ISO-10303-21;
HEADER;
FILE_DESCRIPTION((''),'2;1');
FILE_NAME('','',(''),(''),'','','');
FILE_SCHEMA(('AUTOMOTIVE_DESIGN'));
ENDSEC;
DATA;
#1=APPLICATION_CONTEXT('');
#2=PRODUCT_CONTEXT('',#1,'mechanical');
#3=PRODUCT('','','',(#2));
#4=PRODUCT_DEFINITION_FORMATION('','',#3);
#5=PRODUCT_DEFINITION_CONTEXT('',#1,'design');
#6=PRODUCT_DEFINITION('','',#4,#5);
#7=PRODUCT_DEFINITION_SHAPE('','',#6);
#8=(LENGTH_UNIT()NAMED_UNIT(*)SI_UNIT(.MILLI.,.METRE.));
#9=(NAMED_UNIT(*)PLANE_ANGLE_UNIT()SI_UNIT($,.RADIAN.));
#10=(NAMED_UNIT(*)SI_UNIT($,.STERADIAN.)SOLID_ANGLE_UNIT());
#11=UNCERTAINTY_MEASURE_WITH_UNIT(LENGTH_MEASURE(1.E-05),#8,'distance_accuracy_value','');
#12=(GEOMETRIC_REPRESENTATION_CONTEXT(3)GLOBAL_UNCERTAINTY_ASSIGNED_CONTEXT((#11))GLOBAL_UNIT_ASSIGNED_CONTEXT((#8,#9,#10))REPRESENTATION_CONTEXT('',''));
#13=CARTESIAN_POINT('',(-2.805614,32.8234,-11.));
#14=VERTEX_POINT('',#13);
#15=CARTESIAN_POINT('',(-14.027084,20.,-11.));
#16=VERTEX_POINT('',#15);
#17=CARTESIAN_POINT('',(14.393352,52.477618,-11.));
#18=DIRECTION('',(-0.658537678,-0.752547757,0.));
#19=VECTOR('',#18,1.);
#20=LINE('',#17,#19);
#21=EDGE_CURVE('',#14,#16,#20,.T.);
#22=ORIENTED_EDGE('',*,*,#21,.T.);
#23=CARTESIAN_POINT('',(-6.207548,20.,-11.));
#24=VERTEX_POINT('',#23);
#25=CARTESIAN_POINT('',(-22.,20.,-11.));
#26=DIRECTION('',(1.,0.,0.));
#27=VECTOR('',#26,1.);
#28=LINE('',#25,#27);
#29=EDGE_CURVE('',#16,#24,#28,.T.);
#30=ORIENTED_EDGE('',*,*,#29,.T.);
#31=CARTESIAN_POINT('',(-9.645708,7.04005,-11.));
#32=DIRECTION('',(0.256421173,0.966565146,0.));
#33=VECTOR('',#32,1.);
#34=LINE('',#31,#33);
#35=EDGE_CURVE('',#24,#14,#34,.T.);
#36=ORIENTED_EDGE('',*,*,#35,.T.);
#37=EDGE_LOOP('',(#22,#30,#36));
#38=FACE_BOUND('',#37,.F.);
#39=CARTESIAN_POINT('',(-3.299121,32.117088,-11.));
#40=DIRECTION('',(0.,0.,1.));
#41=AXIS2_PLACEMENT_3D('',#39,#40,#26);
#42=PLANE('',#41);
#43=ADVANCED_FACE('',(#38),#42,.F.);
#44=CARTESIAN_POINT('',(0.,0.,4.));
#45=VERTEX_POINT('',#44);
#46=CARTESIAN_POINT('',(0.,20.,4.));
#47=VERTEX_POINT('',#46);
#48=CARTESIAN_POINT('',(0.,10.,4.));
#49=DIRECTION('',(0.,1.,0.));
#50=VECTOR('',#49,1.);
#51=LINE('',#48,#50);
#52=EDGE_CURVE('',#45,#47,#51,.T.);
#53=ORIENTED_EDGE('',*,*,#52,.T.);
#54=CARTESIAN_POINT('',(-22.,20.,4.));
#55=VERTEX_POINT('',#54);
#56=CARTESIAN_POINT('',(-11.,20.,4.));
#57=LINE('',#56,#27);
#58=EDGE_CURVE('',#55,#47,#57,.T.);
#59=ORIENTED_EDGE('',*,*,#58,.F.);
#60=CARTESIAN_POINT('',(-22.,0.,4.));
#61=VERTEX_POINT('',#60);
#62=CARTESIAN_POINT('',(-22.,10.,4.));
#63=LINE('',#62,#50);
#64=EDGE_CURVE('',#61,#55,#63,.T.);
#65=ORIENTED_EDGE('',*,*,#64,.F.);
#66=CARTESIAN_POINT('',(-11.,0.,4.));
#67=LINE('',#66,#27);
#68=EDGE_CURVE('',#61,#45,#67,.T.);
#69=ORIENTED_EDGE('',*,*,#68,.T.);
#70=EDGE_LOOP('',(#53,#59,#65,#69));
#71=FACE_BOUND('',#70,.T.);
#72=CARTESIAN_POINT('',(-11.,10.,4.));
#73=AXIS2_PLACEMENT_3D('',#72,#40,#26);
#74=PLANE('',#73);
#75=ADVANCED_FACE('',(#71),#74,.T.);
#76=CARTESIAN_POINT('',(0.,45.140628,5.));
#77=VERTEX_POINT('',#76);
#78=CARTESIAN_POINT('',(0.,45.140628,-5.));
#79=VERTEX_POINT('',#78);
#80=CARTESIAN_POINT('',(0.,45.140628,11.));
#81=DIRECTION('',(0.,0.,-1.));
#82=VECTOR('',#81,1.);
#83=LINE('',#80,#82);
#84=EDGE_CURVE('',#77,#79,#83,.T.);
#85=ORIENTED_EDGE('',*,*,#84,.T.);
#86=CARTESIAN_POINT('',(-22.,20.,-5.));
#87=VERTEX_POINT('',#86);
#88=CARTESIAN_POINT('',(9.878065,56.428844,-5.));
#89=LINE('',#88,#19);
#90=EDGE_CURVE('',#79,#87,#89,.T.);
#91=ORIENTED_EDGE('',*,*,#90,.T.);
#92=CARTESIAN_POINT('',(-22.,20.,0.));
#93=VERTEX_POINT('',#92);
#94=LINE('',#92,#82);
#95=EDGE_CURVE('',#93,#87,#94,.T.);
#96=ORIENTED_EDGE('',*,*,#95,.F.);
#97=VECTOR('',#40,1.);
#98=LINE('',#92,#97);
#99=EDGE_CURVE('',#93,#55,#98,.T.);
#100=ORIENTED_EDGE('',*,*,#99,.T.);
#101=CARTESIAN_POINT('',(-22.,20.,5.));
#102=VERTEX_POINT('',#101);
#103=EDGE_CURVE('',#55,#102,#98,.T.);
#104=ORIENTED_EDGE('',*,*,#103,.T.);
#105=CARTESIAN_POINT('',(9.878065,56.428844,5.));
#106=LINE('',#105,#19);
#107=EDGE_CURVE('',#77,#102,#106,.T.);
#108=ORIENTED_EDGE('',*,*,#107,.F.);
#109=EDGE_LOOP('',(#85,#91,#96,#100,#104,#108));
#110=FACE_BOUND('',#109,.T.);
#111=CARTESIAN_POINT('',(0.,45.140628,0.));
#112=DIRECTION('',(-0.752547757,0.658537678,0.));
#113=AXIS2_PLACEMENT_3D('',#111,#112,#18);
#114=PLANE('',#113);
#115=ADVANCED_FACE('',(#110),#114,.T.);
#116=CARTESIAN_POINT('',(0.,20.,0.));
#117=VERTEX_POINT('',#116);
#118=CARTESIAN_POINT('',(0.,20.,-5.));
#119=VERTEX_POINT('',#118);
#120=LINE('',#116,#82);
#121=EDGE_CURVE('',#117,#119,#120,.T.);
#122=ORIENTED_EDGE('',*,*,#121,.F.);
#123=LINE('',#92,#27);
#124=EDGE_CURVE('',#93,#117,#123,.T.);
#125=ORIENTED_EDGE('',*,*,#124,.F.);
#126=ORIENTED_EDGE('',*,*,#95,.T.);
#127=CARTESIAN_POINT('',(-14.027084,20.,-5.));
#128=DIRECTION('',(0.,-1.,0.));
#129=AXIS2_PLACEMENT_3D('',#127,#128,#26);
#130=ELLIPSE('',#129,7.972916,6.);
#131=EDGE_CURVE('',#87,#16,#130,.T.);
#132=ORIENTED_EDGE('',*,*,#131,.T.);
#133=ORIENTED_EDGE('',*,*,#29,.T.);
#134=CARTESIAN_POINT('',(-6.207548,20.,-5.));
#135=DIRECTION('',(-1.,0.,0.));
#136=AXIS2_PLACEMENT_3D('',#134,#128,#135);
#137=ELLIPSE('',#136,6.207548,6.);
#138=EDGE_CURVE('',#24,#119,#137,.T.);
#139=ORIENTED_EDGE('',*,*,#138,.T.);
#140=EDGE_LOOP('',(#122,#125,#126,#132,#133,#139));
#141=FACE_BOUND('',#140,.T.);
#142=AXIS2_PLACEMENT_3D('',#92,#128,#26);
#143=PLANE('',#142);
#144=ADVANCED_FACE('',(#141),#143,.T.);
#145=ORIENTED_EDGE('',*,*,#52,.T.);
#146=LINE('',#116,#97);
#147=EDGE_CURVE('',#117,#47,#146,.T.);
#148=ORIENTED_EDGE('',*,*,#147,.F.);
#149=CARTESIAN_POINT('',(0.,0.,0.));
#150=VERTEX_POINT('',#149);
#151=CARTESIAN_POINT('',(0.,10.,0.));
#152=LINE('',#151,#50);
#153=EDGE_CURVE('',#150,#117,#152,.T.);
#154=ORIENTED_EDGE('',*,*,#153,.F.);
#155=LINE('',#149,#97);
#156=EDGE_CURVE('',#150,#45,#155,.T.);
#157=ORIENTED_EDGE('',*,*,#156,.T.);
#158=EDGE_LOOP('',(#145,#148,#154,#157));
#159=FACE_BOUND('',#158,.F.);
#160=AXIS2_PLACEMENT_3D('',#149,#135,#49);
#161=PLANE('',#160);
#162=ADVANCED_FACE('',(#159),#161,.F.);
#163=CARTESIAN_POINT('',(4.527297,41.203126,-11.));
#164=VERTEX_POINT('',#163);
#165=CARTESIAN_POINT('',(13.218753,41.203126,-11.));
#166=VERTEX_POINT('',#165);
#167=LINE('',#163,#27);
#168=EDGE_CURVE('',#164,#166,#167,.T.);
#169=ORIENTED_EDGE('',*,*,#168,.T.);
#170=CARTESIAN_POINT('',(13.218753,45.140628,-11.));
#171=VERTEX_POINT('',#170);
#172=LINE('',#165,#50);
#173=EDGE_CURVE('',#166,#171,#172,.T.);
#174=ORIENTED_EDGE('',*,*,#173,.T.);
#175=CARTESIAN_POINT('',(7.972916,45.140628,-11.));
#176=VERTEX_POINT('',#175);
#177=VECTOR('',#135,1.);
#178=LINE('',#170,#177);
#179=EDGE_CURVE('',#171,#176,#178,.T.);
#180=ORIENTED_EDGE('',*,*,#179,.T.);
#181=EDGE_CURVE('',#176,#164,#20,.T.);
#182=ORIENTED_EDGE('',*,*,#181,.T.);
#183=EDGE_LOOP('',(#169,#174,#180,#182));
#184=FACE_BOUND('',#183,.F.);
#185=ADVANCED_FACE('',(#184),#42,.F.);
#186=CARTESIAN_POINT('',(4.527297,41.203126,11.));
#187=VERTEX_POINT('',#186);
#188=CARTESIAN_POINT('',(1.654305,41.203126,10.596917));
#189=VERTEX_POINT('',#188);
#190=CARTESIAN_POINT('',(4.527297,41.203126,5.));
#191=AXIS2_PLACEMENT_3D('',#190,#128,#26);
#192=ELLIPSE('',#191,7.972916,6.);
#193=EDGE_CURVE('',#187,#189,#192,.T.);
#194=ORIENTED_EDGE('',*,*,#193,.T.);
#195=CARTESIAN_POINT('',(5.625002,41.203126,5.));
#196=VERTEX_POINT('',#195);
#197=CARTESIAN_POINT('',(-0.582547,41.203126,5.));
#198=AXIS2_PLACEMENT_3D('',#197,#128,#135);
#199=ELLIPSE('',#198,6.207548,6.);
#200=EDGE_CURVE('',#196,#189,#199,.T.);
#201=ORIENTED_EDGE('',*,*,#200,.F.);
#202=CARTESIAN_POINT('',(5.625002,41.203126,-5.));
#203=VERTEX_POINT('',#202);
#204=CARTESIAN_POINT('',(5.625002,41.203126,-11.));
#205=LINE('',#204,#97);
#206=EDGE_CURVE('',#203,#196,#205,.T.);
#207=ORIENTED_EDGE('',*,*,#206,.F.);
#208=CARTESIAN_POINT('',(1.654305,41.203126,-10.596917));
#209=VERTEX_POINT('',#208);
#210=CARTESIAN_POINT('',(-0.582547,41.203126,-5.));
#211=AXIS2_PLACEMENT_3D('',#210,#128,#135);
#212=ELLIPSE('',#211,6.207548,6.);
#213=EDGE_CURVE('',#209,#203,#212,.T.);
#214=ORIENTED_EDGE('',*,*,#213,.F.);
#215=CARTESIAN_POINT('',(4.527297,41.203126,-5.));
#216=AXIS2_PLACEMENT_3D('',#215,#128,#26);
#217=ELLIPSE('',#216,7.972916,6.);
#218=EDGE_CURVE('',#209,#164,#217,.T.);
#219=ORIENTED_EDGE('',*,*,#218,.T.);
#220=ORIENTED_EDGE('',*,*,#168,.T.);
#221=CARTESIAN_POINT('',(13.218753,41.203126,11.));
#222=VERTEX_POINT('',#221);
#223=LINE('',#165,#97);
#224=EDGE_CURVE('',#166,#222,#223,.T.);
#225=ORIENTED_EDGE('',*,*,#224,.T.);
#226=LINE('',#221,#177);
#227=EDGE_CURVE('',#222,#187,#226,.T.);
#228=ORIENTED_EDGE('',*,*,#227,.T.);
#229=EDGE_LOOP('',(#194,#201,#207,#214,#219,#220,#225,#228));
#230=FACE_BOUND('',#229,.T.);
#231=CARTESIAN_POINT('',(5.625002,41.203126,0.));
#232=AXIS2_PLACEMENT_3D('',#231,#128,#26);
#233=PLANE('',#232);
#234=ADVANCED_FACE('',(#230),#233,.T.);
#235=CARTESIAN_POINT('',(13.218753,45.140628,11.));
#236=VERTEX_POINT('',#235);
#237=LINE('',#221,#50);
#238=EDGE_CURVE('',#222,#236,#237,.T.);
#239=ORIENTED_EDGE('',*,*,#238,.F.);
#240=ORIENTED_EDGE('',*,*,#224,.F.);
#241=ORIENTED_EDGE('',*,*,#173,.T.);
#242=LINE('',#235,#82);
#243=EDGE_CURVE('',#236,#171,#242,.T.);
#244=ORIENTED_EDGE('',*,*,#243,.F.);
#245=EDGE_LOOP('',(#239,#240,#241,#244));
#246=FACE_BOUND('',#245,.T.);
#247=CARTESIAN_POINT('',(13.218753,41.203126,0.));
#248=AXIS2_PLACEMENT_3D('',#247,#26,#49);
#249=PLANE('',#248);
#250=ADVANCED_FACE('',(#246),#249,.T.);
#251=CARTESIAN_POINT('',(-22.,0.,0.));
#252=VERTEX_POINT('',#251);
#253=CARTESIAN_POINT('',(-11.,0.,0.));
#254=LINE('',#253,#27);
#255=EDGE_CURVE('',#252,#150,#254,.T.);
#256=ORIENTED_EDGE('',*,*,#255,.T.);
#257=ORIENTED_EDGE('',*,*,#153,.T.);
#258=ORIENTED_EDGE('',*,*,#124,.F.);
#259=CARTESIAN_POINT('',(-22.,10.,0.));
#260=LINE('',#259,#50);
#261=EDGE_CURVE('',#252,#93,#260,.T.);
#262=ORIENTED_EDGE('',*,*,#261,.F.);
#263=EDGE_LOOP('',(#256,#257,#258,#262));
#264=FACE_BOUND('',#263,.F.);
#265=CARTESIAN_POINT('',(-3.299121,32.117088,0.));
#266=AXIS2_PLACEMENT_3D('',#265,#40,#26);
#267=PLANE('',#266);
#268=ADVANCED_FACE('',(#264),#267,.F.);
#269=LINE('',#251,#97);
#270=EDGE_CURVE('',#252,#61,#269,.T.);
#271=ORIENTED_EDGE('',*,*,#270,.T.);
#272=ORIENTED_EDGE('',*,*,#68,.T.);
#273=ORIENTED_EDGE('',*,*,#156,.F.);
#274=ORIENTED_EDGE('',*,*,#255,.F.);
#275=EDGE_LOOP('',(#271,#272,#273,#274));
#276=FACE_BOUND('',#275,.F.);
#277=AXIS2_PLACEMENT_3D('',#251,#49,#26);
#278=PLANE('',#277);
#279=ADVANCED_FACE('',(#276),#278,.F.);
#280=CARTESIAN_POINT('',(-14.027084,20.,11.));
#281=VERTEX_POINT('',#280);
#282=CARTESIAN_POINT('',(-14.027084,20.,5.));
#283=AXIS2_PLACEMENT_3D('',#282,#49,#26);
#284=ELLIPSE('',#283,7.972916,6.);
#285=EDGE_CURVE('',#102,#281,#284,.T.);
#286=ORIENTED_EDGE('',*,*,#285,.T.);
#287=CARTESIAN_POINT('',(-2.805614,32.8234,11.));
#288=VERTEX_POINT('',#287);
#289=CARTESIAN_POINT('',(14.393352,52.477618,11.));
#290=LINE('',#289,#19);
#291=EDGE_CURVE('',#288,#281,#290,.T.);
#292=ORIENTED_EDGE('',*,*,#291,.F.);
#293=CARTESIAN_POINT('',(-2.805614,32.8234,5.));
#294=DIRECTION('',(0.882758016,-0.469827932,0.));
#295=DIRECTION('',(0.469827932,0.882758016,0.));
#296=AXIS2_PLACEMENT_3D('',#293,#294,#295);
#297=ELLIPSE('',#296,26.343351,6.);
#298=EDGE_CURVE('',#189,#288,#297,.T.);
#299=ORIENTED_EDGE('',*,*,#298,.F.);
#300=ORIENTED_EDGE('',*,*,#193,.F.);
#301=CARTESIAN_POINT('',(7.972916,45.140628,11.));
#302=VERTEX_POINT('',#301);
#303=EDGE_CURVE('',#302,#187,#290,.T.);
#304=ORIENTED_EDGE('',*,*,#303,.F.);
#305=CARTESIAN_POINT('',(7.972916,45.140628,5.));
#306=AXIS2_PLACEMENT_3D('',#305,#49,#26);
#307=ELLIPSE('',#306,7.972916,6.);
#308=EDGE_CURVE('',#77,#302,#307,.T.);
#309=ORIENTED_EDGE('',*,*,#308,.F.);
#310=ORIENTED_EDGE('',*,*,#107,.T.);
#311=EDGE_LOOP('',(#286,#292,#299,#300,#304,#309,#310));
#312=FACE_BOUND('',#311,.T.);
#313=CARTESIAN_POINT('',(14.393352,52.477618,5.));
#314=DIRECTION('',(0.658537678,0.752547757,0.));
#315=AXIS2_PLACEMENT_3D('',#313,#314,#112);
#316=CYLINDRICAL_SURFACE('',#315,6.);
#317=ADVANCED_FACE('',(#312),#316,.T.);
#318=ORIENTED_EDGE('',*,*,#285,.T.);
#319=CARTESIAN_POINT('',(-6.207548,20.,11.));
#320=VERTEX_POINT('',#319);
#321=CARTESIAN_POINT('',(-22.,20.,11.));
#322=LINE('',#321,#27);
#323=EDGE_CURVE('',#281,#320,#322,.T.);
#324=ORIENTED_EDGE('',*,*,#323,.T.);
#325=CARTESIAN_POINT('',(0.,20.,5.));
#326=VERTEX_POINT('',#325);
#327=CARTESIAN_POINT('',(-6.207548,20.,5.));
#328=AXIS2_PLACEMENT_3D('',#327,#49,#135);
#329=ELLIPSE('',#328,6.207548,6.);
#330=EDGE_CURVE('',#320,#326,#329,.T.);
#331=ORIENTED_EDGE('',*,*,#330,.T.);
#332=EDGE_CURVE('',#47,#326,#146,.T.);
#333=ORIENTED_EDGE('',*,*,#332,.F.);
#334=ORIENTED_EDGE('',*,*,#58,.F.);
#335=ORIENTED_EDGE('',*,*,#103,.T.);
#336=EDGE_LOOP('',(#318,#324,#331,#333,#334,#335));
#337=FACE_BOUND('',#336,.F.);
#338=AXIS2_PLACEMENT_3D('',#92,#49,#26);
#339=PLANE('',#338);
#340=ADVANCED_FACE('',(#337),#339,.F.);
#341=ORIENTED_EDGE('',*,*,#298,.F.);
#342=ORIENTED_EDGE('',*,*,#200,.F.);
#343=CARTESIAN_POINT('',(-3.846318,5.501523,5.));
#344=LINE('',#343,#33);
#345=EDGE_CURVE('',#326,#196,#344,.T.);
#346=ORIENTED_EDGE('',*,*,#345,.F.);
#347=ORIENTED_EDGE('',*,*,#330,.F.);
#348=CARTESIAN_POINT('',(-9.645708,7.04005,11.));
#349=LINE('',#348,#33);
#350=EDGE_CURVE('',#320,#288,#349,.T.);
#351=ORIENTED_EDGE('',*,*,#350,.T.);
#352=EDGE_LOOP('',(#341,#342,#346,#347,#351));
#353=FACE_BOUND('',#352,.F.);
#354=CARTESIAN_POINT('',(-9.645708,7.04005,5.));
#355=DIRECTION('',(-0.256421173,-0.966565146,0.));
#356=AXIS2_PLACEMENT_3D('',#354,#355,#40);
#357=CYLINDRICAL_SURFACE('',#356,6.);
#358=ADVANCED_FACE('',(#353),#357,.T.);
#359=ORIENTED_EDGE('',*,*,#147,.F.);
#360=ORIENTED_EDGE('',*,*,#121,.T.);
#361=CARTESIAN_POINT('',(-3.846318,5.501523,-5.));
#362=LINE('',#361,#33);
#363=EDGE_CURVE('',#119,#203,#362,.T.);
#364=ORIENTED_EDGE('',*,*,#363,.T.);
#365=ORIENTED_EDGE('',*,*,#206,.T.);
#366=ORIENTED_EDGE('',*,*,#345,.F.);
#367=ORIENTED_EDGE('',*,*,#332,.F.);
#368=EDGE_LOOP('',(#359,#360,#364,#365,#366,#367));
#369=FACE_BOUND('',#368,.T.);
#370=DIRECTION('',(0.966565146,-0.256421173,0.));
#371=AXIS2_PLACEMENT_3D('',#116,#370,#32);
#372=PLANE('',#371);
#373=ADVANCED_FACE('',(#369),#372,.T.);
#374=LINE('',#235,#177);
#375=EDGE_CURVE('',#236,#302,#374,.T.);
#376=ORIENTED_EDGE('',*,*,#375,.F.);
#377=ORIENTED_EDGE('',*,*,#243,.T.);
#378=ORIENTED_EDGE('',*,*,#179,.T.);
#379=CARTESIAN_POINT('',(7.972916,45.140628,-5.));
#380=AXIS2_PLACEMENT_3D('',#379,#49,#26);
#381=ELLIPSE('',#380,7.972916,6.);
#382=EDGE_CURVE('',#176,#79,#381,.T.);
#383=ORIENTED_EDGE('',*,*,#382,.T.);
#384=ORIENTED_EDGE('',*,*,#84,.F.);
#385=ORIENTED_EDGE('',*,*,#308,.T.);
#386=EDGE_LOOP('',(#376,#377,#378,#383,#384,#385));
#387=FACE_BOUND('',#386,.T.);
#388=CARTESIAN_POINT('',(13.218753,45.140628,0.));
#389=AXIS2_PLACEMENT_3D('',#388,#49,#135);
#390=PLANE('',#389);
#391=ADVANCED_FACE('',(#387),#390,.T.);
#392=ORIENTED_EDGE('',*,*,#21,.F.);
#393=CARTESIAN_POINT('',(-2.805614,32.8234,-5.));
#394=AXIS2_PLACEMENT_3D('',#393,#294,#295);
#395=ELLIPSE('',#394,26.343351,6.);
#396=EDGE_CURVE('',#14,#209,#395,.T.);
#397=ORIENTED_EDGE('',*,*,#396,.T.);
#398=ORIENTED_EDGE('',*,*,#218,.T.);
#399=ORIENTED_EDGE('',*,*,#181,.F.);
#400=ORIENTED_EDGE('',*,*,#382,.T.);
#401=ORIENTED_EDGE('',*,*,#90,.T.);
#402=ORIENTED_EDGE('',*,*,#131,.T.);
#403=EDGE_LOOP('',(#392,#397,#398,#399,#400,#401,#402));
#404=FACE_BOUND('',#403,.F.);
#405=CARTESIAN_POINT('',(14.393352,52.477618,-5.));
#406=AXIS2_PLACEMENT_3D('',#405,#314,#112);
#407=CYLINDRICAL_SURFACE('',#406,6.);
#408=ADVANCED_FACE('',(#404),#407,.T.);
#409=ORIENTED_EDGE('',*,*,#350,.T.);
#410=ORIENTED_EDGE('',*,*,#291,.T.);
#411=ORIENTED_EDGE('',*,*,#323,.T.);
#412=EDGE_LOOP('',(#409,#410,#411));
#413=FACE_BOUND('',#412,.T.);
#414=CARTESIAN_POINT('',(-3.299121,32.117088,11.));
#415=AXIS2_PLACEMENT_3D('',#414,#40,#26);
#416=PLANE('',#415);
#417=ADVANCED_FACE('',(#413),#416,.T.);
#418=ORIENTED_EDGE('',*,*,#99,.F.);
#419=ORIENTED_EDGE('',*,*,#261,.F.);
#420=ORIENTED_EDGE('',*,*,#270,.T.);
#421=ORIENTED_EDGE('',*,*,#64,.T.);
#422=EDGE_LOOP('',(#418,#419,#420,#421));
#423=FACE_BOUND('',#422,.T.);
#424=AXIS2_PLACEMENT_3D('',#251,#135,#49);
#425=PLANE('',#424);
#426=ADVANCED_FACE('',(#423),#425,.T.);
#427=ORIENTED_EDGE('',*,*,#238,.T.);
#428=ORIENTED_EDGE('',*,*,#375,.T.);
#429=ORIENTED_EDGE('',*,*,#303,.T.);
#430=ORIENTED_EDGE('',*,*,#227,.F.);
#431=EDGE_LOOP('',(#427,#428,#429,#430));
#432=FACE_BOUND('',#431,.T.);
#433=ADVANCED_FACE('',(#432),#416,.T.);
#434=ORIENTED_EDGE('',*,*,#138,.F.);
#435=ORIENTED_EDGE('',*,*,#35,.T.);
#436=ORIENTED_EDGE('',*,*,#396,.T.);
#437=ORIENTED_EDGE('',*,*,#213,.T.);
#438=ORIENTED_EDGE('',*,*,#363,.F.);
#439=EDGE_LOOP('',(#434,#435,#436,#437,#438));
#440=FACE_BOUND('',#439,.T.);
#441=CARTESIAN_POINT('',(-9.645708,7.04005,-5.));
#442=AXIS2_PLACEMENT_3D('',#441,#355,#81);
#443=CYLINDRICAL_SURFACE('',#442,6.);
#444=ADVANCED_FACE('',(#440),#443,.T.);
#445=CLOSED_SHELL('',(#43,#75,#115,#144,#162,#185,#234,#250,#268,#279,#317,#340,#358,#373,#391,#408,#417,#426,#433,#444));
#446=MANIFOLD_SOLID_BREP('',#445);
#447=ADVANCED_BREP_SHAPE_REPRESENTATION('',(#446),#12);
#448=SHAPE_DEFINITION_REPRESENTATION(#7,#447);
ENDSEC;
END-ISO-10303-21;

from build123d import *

# Parameters (mm, degrees)
F0_W         = 22
F0_H         = 20
F1_DEPTH     = 4
F2_DEPTH     = 11
F3_DEPTH     = 11
F4_T1_DEPTH  = 63.4073519566
F4_T6_DEPTH  = 51.9365723987
F4_T11_DEPTH = 51.9365723987


# Not quite as in the source:
# - a fillet or chamfer that OpenCascade refuses, or shapes differently, is made with other operations: its cross-section is extruded or revolved along the edge and cut away or added


with BuildPart() as f1:
    # F0 (on Top) → F1 (new body)
    with BuildSketch(Plane.XY):
        with Locations((-11, 10)):
            Rectangle(F0_W, F0_H)
    extrude(amount=F1_DEPTH)

    # F0 (on Top) → F2 (join)
    with BuildSketch(Plane.XY):
        Polygon((-22, 20), (0, 20), (5.6250016205, 41.2031263113), (13.2187530398, 41.2031263113), (13.2187530398, 45.1406277716), (0, 45.1406277716), align=None)
    extrude(amount=F2_DEPTH)

    # F0 (on Top) → F3 (join)
    with BuildSketch(Plane.XY):
        Polygon((-22, 20), (0, 20), (5.6250016205, 41.2031263113), (13.2187530398, 41.2031263113), (13.2187530398, 45.1406277716), (0, 45.1406277716), align=None)
    extrude(amount=-F3_DEPTH)

    # F4: fillet of radius 6 on 4 edges, made by hand

    # F4_s2 → F4_t1 (cut)
    with BuildSketch(Plane(origin=(32.2489050023, 36.8526234865, 0), x_dir=(0, 0, 1), z_dir=(-0.6585376784, -0.7525477567, 0))):
        with BuildLine():
            ThreePointArc((-5, 29.7268042156), (-9.2426406871, 27.9694449027), (-11, 23.7268042156))
            Line((-11, 23.7268042156), (-11, 29.7268042156))
            Line((-11, 29.7268042156), (-5, 29.7268042156))
        make_face()
        with BuildLine():
            ThreePointArc((5, 29.7268042156), (9.2426406871, 27.9694449027), (11, 23.7268042156))
            Line((11, 23.7268042156), (11, 29.7268042156))
            Line((11, 29.7268042156), (5, 29.7268042156))
        make_face()
    extrude(amount=F4_T1_DEPTH, mode=Mode.SUBTRACT)


with BuildPart() as f4_tool4:
    # F4_s5 → F4_t6 (new body)
    with BuildSketch(Plane(origin=(1.1106377761, 4.1864864479, 0), x_dir=(0, 0, 1), z_dir=(0.2564211727, 0.9665651464, 0))):
        with BuildLine():
            ThreePointArc((-11, -11.1284234549), (-9.2426406871, -6.8857827678), (-5, -5.1284234549))
            Line((-5, -5.1284234549), (-11, -5.1284234549))
            Line((-11, -5.1284234549), (-11, -11.1284234549))
        make_face()
    extrude(amount=F4_T6_DEPTH)

    split(bisect_by=Plane.XZ.offset(-41.2031263113), keep=Keep.TOP)


with BuildPart() as f1_1:
    add(f1.part)

    # F4_t3: cut F4_tool4
    add(f4_tool4.part, mode=Mode.SUBTRACT)


with BuildPart() as f4_tool9:
    # F4_s10 → F4_t11 (new body)
    with BuildSketch(Plane(origin=(1.1106377761, 4.1864864479, 0), x_dir=(0, 0, 1), z_dir=(0.2564211727, 0.9665651464, 0))):
        with BuildLine():
            ThreePointArc((11, -11.1284234549), (9.2426406871, -6.8857827678), (5, -5.1284234549))
            Line((5, -5.1284234549), (11, -5.1284234549))
            Line((11, -5.1284234549), (11, -11.1284234549))
        make_face()
    extrude(amount=F4_T11_DEPTH)

    split(bisect_by=Plane.XZ.offset(-41.2031263113), keep=Keep.TOP)


with BuildPart() as f1_2:
    add(f1_1.part)

    # F4_t8: cut F4_tool9
    add(f4_tool9.part, mode=Mode.SUBTRACT)


solid = f1_2.part
